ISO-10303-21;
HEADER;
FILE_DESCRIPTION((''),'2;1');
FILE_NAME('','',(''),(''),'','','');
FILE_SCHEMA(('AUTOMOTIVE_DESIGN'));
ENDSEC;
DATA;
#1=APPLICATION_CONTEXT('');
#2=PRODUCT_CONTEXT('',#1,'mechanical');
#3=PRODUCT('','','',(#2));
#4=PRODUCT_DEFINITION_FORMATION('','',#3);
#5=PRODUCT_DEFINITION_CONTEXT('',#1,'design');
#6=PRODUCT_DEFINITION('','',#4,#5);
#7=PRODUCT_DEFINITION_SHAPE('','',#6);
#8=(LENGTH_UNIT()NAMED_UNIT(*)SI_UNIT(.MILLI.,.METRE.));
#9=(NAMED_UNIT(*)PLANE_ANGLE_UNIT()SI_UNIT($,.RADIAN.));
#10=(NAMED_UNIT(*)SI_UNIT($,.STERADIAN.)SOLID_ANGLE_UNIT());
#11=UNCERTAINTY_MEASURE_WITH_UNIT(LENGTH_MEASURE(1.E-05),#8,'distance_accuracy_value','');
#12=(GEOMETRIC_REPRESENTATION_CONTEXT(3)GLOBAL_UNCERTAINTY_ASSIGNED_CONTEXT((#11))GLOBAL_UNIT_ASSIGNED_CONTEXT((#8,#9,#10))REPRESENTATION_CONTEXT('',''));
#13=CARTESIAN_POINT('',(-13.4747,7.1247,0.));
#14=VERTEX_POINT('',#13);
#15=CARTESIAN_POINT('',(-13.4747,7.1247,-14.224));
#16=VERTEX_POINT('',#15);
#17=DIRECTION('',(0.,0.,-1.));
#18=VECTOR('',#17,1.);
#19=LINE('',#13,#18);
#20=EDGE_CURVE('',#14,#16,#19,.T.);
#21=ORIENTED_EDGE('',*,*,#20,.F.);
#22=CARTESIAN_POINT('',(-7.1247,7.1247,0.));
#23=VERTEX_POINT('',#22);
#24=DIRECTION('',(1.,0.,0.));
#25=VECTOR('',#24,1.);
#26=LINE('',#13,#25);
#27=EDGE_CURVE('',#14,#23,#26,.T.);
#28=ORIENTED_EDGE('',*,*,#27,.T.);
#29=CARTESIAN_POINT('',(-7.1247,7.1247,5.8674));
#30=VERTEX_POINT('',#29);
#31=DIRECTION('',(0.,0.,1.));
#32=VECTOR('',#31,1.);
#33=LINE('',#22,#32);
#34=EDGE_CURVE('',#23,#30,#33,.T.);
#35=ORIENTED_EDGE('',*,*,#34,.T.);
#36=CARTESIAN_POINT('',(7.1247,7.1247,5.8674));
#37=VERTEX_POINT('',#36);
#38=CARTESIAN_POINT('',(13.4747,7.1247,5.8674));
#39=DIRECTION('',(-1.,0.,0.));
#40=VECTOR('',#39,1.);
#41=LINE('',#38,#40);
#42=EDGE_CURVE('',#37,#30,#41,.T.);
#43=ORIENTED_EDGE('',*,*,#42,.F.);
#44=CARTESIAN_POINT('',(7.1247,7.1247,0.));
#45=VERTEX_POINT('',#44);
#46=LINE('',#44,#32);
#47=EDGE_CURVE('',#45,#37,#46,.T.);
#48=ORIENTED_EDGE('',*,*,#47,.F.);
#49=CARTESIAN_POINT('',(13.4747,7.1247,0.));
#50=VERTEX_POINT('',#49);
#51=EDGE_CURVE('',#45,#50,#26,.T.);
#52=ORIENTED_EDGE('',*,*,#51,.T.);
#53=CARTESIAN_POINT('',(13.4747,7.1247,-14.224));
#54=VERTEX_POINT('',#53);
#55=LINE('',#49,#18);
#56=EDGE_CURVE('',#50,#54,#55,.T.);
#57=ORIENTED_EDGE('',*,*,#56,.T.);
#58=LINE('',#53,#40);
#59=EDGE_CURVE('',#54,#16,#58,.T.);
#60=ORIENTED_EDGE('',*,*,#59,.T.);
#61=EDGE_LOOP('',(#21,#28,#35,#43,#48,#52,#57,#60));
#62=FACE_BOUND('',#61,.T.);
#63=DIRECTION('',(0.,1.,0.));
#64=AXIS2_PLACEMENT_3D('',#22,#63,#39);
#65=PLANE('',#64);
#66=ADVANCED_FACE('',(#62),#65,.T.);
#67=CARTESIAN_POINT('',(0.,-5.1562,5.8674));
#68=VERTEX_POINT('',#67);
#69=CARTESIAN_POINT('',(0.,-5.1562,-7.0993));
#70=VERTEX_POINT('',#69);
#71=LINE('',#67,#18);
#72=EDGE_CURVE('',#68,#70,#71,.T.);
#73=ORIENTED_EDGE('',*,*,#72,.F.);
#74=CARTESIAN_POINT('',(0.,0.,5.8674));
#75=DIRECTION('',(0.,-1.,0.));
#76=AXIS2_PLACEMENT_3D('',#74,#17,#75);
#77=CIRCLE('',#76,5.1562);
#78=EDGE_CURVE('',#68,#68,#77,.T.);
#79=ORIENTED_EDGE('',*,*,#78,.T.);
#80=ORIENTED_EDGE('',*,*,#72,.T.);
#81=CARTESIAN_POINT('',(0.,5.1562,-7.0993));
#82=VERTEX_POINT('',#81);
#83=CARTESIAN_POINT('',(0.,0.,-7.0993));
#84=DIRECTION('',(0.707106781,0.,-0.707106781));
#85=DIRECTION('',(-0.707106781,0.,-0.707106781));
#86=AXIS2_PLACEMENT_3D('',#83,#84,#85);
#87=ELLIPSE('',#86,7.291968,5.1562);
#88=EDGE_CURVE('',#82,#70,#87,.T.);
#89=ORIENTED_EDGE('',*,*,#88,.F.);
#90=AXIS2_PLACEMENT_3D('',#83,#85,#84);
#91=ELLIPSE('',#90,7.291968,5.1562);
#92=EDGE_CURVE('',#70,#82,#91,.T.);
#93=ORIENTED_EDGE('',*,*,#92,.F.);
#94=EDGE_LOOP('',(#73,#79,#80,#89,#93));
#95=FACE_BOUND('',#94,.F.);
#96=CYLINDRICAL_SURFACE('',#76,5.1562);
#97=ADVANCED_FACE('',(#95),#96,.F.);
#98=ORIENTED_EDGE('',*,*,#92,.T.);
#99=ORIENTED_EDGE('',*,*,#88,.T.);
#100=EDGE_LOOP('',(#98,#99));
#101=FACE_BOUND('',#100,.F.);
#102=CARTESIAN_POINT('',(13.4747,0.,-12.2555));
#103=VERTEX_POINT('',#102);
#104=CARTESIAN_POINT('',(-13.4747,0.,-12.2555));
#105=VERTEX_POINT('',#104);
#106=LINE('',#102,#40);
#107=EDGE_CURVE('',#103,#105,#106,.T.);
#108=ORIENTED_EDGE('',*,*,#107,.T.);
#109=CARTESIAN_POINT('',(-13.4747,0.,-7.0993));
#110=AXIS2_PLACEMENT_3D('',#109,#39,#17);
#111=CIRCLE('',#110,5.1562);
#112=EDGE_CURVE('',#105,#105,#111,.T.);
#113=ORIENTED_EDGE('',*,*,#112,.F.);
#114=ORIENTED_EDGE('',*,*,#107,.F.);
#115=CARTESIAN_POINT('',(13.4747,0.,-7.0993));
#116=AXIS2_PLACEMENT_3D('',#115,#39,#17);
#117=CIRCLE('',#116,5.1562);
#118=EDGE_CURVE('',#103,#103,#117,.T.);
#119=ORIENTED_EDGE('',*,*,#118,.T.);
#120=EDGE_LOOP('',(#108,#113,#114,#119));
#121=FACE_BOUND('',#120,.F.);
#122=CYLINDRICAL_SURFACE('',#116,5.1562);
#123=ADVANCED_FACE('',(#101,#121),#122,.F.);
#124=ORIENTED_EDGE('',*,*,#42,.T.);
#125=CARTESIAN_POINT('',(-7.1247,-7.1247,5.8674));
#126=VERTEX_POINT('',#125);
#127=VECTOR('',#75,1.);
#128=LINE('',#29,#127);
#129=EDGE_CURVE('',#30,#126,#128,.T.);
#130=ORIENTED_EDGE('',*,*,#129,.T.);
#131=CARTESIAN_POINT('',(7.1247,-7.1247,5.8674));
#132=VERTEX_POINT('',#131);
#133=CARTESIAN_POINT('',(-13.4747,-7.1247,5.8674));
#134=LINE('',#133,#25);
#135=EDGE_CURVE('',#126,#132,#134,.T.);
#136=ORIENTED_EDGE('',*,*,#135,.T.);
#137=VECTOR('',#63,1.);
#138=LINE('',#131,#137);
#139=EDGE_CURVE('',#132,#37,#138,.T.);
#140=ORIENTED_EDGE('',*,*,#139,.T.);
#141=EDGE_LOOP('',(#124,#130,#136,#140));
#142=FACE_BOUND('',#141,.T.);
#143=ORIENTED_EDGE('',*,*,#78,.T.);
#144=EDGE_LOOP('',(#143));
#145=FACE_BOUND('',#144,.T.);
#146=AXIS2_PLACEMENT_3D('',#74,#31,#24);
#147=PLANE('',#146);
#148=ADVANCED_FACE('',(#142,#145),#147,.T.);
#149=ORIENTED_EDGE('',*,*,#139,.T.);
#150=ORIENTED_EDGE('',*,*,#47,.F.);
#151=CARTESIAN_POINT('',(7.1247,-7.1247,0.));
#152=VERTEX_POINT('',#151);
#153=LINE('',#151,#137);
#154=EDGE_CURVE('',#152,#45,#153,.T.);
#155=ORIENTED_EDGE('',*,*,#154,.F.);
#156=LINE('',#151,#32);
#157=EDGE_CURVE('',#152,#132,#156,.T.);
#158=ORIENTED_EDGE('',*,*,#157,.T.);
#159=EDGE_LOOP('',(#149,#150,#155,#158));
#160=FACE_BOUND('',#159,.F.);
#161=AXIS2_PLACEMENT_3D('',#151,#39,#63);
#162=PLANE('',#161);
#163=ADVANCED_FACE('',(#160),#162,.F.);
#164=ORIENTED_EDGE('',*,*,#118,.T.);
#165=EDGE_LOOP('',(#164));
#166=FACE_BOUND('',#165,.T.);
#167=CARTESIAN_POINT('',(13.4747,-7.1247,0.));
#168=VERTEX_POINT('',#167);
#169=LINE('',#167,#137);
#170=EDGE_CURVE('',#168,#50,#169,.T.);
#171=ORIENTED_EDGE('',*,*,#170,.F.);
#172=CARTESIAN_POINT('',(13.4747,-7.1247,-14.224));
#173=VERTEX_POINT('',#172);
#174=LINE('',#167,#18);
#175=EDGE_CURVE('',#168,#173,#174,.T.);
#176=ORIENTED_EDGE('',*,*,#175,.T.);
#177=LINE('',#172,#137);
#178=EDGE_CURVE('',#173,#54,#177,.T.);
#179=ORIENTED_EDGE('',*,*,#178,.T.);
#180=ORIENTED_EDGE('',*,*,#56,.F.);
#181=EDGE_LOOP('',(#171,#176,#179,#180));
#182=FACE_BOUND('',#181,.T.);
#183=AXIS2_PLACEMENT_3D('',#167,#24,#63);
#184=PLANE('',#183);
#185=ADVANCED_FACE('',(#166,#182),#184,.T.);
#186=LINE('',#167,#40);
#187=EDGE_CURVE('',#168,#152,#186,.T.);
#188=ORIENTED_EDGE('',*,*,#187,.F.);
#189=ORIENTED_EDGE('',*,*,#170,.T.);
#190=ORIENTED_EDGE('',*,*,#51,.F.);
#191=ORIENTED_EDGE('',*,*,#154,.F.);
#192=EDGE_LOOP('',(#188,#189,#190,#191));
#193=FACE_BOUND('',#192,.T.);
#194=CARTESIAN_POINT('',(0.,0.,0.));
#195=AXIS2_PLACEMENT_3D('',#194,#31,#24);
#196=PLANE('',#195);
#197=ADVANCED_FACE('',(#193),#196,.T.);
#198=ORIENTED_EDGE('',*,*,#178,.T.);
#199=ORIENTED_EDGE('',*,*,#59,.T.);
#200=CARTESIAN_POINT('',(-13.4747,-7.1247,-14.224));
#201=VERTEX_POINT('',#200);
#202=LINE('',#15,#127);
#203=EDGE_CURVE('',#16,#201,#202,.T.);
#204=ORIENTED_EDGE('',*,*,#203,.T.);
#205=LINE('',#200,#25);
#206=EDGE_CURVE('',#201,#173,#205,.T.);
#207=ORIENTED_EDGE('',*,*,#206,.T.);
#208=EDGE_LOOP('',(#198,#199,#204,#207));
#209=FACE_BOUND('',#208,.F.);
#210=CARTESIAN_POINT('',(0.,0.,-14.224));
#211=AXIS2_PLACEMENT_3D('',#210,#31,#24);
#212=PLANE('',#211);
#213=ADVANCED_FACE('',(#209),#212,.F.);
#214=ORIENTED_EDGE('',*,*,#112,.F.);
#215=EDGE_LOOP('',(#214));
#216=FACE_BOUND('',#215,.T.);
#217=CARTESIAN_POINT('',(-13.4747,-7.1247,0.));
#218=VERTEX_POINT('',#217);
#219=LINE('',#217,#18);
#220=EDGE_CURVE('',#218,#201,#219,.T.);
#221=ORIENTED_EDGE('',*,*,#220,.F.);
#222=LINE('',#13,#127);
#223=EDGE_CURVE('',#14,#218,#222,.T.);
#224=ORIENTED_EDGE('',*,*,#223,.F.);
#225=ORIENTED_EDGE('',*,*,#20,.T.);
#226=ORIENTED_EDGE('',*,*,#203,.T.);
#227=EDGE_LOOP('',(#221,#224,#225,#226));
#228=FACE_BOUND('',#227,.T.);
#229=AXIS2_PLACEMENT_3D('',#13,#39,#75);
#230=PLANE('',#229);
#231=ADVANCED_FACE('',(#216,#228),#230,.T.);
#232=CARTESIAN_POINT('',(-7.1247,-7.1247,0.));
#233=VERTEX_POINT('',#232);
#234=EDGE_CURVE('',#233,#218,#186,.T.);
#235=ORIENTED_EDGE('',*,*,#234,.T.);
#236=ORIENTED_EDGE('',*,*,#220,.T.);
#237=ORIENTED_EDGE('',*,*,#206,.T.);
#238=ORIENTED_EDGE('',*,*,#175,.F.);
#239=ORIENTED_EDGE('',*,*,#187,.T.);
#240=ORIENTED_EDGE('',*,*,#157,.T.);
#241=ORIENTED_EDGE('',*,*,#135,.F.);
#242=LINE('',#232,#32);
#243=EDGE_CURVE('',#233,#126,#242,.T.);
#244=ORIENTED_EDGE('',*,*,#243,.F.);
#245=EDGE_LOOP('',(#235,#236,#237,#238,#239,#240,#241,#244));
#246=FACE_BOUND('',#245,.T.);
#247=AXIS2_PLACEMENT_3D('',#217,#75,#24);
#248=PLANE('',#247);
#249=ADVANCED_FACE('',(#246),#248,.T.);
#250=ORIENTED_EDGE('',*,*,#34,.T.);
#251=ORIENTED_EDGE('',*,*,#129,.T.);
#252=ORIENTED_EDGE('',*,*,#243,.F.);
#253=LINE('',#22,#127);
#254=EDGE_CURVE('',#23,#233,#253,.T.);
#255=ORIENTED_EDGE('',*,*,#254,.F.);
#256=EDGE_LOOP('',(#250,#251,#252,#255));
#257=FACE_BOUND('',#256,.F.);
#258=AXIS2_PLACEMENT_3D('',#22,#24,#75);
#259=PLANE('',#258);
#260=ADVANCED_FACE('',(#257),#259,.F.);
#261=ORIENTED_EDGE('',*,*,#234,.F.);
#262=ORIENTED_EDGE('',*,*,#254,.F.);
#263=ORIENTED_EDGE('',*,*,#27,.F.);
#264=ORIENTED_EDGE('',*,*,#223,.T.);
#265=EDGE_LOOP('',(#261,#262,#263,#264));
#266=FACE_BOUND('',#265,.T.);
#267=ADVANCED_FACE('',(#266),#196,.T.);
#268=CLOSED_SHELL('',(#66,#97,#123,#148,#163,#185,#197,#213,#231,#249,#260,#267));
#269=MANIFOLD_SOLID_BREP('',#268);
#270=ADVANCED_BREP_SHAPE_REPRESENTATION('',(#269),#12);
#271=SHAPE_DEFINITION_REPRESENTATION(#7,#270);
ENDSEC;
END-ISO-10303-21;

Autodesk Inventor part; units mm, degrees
ref_plane "YZ Plane" through (0, 0, 0) normal (1, 0, 0) x (0, 1, 0)
ref_plane "XZ Plane" through (0, 0, 0) normal (0, 1, 0) x (-1, 0, 0)
ref_plane "XY Plane" through (0, 0, 0) normal (0, 0, 1) x (1, 0, 0)
sketch "Sketch1" plane through (0, 0, 0) normal (0, 0, 1) x (1, 0, 0)
  line L0 (-13.4747, -7.1247) -> (13.4747, -7.1247)
  line L1 (13.4747, -7.1247) -> (13.4747, 7.1247)
  line L2 (13.4747, 7.1247) -> (-13.4747, 7.1247)
  line L3 (-13.4747, 7.1247) -> (-13.4747, -7.1247)
  line L4 (-13.4747, -7.1247) -> (13.4747, 7.1247) construction
  line L5 (13.4747, -7.1247) -> (-13.4747, 7.1247) construction
  line L6 (-7.1247, -7.1247) -> (7.1247, -7.1247)
  line L7 (7.1247, -7.1247) -> (7.1247, 7.1247)
  line L8 (7.1247, 7.1247) -> (-7.1247, 7.1247)
  line L9 (-7.1247, 7.1247) -> (-7.1247, -7.1247)
  line L10 (-7.1247, -7.1247) -> (7.1247, 7.1247) construction
  line L11 (7.1247, -7.1247) -> (-7.1247, 7.1247) construction
  point P0 (0, 0)
  dimension "d0" = 26.9494
  dimension "d1" = 14.2494
  dimension "d2" = 14.2494
extrude "Extrusion1" add sketch "Sketch1" along normal blind 5.8674 contours L9 L2 L7 L0
extrude "Extrusion2" add sketch "Sketch1" against normal blind 14.224
sketch "Sketch2" plane through (13.4747, -7.1247, 0) normal (1, 0, 0) x (0, 0, -1)
  line L0 (0, 0) -> (0, 14.2494) construction
  line L1 (0, 0) -> (14.224, 0) construction
  line L2 (14.224, 14.2494) -> (14.224, 0) construction
  line L3 (0, 14.2494) -> (14.224, 14.2494) construction
  circle A0 centre (7.0993, 7.1247) radius 7.1247 construction
  point P0 (0, 7.1247)
hole "Hole1" at (13.4747, 0, -7.0993) direction (-1, 0, 0) diameter 10.3124 end through all
sketch "Sketch3" plane through (0, 0, 5.8674) normal (0, 0, 1) x (1, 0, 0)
  point P0 (0, 0)
  point P1 (0, 0)
hole "Hole2" at (0, 0, 5.8674) direction (0, 0, -1) diameter 10.3124 end up to surface
properties part number "PPPP" material "Brass"
